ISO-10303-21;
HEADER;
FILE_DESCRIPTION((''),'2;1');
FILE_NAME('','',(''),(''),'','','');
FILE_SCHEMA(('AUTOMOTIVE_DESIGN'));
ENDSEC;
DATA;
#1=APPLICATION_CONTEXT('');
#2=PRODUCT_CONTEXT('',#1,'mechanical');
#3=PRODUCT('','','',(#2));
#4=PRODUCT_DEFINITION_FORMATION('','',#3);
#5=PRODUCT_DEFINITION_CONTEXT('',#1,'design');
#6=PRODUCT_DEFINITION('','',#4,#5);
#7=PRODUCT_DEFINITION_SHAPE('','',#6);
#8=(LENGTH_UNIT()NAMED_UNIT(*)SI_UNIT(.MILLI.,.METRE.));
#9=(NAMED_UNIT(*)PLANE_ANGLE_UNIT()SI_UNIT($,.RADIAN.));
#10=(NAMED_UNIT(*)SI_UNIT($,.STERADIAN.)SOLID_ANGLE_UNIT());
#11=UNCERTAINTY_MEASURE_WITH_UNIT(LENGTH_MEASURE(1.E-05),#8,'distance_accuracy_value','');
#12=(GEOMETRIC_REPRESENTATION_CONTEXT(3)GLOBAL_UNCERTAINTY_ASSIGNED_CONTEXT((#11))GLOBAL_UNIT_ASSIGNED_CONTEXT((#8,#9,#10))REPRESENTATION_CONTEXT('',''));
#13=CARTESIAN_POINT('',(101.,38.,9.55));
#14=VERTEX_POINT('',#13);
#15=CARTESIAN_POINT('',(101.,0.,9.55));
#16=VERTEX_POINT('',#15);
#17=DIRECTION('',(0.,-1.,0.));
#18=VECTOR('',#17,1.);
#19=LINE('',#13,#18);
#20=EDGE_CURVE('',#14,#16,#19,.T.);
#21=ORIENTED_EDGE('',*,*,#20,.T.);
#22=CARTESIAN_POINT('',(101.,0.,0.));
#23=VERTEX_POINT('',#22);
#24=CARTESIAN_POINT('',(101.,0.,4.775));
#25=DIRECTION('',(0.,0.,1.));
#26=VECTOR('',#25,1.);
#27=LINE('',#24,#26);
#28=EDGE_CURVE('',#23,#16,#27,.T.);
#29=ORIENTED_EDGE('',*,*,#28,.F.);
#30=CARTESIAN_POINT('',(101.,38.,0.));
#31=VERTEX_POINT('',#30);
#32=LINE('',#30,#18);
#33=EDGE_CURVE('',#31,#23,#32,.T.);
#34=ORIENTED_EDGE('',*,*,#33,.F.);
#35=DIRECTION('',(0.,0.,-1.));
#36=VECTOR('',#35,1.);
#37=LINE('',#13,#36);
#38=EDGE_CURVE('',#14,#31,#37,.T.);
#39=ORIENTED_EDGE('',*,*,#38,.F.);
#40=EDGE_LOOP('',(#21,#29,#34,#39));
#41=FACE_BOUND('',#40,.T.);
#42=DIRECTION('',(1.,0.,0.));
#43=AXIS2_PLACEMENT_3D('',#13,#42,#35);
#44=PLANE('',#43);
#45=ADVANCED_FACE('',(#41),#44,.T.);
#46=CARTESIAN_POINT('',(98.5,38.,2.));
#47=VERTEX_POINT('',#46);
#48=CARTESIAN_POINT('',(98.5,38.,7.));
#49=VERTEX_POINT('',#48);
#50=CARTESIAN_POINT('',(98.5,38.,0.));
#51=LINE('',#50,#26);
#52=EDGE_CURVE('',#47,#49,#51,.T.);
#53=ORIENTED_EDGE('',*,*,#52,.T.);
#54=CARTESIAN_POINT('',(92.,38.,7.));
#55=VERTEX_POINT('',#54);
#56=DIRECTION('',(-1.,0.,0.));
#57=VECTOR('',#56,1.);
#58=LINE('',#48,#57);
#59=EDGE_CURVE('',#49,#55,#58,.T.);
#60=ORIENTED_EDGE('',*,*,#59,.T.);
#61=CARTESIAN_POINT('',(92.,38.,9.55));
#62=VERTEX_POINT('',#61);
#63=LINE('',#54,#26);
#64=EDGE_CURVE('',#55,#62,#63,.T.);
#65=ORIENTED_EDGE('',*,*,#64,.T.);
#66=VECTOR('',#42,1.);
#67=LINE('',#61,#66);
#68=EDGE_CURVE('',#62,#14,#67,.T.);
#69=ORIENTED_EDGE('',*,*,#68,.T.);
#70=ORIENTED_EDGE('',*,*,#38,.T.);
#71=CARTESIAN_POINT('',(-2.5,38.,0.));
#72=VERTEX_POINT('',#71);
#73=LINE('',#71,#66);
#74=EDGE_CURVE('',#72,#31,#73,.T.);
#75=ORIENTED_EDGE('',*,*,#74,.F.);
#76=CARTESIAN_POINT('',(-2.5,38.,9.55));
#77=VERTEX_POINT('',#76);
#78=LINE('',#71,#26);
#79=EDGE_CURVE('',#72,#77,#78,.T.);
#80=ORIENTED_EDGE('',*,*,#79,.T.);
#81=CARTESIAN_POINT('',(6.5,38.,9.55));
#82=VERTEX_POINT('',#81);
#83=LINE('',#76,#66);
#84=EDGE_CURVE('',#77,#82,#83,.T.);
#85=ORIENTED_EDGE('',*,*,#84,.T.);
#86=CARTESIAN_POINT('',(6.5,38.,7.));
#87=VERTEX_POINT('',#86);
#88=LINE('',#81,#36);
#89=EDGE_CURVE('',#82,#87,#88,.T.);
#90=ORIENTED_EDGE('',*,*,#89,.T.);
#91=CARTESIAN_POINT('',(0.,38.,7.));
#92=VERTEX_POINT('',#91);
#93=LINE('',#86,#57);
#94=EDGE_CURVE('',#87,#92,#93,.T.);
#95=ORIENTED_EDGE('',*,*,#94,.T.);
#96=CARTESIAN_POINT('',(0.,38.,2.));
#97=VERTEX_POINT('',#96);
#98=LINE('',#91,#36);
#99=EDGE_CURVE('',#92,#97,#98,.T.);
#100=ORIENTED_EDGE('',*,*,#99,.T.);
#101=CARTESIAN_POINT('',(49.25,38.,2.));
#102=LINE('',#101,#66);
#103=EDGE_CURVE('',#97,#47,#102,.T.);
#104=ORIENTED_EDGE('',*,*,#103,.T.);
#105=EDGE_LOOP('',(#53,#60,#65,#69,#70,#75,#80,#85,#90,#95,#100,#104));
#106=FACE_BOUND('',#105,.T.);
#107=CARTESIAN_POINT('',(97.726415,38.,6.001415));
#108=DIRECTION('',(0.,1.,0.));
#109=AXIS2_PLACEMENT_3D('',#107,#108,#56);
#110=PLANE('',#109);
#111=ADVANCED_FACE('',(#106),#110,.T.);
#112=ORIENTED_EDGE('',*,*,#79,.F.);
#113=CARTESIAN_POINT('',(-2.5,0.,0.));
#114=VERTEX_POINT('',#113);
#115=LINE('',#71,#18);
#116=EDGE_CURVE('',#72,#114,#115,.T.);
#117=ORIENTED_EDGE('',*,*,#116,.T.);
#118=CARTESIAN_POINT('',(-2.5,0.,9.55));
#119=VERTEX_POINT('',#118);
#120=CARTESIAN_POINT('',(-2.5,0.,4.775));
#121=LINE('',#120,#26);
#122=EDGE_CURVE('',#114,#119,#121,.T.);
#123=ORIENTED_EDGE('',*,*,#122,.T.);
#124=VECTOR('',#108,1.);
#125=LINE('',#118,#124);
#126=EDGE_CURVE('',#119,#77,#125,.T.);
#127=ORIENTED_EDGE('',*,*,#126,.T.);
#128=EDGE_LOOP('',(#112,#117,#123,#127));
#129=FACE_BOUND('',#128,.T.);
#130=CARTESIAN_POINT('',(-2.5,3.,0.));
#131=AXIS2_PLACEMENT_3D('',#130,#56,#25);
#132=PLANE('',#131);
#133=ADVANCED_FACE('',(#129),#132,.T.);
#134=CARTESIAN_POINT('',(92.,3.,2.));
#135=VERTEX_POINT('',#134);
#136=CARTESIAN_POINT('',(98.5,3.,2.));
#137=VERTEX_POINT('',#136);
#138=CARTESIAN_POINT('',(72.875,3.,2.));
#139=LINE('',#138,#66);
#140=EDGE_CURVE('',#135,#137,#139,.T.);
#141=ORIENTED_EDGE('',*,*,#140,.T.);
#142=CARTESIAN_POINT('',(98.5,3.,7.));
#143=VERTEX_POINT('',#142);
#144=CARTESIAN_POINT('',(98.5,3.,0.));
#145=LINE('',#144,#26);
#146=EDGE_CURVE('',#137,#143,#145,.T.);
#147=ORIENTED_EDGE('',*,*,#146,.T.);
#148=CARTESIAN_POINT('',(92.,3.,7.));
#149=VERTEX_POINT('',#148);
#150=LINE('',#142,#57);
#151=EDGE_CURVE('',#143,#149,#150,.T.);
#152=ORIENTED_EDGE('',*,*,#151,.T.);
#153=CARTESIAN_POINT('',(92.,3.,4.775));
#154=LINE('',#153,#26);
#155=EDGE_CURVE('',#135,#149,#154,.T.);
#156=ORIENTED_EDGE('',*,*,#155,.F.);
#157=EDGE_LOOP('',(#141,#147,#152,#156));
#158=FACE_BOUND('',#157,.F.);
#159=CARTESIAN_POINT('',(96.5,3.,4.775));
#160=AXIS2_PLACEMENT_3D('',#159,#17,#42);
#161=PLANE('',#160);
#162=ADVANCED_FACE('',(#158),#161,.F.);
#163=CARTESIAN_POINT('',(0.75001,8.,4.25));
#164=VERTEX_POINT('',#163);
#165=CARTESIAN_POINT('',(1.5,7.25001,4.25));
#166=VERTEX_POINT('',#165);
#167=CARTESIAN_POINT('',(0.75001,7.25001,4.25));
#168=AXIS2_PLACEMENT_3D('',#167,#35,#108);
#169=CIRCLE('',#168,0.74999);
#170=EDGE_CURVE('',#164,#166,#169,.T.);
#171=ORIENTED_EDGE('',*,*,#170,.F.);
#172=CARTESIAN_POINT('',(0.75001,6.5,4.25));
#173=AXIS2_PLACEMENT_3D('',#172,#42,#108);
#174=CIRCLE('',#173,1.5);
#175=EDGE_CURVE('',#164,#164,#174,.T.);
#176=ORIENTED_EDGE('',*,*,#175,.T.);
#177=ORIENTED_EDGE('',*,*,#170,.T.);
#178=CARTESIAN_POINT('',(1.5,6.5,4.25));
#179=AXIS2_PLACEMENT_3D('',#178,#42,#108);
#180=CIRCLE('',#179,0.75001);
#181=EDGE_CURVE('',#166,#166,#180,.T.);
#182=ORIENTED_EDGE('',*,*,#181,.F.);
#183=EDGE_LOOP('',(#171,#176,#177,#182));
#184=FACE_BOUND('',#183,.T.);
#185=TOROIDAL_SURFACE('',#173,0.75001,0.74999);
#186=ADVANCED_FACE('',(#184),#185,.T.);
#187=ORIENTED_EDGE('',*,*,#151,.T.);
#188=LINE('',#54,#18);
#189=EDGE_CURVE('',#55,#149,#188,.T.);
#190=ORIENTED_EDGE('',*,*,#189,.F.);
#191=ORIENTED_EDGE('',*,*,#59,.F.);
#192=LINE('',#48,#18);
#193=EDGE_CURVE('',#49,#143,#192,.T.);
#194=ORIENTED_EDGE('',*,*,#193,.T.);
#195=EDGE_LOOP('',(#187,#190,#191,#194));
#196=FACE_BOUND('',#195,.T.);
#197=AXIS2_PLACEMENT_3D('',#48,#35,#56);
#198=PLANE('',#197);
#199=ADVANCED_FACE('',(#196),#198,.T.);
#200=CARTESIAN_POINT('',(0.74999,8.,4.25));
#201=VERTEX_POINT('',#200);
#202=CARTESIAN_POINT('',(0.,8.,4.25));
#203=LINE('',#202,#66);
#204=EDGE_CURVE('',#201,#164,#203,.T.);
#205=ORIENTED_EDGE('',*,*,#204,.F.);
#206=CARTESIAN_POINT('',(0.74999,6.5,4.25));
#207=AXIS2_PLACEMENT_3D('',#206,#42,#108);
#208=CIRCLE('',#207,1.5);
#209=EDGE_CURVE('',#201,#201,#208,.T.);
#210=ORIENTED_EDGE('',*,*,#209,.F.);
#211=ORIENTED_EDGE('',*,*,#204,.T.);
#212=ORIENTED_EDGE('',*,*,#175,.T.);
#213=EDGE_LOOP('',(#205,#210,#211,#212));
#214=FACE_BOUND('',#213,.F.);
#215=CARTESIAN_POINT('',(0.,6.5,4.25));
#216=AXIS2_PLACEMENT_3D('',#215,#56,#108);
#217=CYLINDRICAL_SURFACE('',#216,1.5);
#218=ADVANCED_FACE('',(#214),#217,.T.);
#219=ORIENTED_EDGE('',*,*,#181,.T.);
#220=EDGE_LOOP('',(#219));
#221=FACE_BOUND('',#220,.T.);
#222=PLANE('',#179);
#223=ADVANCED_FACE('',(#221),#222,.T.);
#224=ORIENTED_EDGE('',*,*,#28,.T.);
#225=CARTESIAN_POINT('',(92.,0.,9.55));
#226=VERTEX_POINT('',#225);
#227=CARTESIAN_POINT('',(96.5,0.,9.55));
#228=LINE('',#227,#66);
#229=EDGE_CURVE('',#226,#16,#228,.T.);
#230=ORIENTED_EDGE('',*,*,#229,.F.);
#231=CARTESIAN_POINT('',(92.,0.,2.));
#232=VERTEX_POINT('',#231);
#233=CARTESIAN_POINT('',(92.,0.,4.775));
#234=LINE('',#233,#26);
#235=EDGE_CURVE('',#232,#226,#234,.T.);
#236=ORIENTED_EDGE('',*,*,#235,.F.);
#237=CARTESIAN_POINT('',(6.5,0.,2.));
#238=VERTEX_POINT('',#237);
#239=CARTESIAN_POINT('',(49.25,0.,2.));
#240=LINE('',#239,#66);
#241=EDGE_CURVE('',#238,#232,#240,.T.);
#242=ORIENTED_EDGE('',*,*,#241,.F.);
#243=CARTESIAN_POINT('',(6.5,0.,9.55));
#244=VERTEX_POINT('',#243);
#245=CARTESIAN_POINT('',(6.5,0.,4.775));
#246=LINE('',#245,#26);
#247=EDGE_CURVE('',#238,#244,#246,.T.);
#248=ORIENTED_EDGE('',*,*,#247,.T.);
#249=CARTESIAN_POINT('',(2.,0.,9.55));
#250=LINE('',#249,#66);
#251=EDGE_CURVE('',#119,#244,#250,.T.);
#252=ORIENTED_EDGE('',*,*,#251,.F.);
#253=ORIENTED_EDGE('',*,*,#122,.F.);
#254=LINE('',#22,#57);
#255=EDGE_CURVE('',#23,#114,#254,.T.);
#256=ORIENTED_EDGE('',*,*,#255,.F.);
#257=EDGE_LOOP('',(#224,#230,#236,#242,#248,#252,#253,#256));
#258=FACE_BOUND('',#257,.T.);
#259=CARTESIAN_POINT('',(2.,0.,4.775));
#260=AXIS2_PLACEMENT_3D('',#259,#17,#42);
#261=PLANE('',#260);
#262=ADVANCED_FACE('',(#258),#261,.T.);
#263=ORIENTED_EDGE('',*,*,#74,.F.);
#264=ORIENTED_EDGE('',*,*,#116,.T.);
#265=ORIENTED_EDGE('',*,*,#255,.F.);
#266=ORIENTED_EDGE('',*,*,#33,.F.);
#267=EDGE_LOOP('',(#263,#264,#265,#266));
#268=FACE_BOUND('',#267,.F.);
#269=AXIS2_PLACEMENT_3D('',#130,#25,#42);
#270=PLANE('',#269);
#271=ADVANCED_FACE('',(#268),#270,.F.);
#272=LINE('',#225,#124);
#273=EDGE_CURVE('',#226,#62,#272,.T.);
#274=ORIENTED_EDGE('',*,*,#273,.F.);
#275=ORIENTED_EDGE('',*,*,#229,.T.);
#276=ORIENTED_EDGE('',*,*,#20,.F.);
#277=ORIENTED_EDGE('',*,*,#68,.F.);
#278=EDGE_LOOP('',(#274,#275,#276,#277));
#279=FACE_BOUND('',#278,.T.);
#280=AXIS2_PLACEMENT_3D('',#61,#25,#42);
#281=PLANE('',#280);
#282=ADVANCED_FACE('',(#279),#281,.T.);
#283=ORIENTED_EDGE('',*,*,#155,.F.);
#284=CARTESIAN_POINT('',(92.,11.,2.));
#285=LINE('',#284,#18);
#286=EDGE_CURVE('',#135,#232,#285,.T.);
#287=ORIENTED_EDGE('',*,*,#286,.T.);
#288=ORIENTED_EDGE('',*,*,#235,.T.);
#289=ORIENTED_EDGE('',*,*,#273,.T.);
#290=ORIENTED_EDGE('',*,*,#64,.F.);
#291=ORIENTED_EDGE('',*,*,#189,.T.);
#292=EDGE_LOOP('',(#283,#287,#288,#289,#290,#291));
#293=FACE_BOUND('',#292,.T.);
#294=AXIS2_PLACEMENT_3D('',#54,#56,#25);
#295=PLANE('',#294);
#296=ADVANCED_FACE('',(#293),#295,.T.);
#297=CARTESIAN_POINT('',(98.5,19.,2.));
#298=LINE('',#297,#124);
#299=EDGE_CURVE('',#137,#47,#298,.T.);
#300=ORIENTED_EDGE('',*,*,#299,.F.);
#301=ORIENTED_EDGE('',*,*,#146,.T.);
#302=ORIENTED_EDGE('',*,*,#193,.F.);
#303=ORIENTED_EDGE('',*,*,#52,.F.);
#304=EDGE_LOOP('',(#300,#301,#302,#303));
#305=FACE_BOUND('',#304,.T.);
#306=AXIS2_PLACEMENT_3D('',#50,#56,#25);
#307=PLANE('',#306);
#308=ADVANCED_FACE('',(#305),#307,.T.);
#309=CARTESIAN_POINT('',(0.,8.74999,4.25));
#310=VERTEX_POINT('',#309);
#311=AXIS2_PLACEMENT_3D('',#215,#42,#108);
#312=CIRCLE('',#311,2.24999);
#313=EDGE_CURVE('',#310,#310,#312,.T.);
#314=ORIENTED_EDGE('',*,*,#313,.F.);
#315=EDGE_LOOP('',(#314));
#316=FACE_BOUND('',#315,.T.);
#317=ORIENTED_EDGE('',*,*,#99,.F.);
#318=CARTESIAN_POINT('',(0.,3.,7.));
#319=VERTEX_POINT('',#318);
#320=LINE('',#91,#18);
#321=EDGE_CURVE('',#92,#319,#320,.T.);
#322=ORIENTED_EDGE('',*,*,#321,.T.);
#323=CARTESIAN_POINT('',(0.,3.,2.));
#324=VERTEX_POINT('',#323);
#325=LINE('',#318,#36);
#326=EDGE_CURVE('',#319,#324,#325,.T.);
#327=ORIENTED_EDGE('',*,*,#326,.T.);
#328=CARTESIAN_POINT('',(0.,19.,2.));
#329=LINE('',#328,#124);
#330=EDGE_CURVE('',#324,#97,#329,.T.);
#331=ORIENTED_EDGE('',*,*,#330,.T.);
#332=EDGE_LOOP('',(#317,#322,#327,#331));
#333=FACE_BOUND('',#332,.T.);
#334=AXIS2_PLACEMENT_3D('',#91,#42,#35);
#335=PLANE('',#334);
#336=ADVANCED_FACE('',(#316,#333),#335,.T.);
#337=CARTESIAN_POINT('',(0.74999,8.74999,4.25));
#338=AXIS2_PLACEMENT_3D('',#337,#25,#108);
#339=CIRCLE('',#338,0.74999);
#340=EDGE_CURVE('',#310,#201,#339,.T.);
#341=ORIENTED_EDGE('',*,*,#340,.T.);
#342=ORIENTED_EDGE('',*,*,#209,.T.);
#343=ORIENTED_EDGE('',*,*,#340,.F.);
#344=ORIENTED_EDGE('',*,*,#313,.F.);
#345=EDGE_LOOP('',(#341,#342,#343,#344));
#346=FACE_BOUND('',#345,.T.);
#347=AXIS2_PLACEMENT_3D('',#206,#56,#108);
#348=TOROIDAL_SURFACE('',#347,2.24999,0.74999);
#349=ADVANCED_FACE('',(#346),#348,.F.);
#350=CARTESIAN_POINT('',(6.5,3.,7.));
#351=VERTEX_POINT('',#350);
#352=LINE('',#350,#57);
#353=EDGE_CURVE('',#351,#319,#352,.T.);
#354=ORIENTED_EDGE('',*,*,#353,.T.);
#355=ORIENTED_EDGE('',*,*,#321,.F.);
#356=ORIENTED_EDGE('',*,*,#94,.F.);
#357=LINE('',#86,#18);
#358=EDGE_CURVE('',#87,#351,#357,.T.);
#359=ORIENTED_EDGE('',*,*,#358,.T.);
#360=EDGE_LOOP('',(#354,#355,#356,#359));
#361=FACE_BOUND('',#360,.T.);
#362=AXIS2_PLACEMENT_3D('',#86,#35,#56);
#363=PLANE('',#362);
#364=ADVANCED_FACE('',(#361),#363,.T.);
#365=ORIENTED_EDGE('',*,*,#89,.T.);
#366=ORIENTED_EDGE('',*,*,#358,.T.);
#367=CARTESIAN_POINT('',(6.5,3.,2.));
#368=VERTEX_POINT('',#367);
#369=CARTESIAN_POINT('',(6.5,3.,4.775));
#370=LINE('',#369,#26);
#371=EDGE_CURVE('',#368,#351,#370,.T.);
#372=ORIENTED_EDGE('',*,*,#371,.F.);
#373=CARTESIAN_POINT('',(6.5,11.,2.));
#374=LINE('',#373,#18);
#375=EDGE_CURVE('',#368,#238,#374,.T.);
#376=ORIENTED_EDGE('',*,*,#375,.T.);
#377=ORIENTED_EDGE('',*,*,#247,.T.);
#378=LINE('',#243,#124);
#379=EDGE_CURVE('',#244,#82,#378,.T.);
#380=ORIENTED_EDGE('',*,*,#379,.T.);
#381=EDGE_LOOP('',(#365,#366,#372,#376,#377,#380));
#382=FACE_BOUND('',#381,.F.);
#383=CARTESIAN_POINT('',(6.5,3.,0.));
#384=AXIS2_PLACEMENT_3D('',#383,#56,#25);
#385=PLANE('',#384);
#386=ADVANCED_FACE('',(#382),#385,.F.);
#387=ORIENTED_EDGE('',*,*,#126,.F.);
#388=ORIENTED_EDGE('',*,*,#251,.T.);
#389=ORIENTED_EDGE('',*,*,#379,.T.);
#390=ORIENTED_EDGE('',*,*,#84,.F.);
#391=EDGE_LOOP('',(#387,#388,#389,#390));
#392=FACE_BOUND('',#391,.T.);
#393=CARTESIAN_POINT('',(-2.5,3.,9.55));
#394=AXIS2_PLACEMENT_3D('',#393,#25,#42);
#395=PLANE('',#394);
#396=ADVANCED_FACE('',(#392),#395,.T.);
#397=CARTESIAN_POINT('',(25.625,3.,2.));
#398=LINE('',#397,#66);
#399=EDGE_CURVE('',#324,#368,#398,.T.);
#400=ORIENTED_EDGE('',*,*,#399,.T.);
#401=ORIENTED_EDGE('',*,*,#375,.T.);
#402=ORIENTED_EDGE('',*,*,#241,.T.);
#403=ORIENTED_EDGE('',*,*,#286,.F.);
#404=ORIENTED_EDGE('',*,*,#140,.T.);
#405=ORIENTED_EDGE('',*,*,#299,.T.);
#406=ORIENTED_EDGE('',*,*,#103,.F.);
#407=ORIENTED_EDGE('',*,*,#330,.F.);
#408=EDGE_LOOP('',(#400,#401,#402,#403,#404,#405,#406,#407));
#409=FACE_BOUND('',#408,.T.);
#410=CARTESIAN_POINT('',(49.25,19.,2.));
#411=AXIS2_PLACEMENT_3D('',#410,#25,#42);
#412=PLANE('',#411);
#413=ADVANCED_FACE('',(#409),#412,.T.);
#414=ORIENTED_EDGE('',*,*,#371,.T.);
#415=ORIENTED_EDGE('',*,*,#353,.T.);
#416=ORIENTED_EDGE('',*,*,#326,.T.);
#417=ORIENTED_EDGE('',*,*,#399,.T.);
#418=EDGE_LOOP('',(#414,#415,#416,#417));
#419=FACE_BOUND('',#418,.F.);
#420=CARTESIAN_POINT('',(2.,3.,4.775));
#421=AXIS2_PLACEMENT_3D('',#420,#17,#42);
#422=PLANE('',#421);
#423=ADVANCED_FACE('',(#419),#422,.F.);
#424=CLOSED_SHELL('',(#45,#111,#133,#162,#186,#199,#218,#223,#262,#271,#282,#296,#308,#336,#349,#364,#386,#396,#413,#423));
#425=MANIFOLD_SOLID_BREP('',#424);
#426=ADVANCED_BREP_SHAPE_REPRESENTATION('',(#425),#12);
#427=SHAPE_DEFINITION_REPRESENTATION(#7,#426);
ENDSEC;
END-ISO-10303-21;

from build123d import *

# Parameters (mm, degrees)
F0_W     = 98.5
F0_H     = 38
F1_DEPTH = 2
F3_DEPTH = 35
F4_W     = 9
F4_H     = 9.55
F5_DEPTH = 3
F6_R     = 1.5
F7_DEPTH = 1.5
F8_R     = 0.74999


# Not quite as in the source:
# - a fillet or chamfer is up to 0.001 mm smaller than in the source, because OpenCascade refuses the exact size


with BuildPart() as f1:
    # F0 (on Top) → F1 (new body)
    with BuildSketch(Plane.XY):
        with Locations((49.25, 19)):
            Rectangle(F0_W, F0_H)
    extrude(amount=F1_DEPTH)

    # F2 (on face) → F3 (join)
    with BuildSketch(Plane(origin=(0, 38, 0), x_dir=(-1, 0, 0), z_dir=(0, 1, 0))):
        Polygon((-101, 0), (-98.5, 0), (-98.5, 7), (-92, 7), (-92, 9.55), (-101, 9.55), align=None)
        Polygon((0, 7), (0, 0), (2.5, 0), (2.5, 9.55), (-6.5, 9.55), (-6.5, 7), align=None)
    extrude(amount=-F3_DEPTH)

    # F4 (on face) → F5 (join)
    with BuildSketch(Plane.XZ.offset(-3)):
        with Locations((2, 4.775)):
            Rectangle(F4_W, F4_H)
        with Locations((96.5, 4.775)):
            Rectangle(F4_W, F4_H)
    extrude(amount=F5_DEPTH)

    # F6 (on face) → F7 (join)
    with BuildSketch(Plane.YZ):
        with Locations((6.5, 4.25)):
            Circle(F6_R)
    extrude(amount=F7_DEPTH)

    # F8 (radius 0.75 in the source; OpenCascade refuses exactly that, so slightly less here)
    f8_edges = [f1.edges().sort_by_distance(p)[0] for p in [
        (1.5, 5, 4.25),
        (0, 5, 4.25),
    ]]
    fillet(f8_edges, radius=F8_R)


solid = f1.part
